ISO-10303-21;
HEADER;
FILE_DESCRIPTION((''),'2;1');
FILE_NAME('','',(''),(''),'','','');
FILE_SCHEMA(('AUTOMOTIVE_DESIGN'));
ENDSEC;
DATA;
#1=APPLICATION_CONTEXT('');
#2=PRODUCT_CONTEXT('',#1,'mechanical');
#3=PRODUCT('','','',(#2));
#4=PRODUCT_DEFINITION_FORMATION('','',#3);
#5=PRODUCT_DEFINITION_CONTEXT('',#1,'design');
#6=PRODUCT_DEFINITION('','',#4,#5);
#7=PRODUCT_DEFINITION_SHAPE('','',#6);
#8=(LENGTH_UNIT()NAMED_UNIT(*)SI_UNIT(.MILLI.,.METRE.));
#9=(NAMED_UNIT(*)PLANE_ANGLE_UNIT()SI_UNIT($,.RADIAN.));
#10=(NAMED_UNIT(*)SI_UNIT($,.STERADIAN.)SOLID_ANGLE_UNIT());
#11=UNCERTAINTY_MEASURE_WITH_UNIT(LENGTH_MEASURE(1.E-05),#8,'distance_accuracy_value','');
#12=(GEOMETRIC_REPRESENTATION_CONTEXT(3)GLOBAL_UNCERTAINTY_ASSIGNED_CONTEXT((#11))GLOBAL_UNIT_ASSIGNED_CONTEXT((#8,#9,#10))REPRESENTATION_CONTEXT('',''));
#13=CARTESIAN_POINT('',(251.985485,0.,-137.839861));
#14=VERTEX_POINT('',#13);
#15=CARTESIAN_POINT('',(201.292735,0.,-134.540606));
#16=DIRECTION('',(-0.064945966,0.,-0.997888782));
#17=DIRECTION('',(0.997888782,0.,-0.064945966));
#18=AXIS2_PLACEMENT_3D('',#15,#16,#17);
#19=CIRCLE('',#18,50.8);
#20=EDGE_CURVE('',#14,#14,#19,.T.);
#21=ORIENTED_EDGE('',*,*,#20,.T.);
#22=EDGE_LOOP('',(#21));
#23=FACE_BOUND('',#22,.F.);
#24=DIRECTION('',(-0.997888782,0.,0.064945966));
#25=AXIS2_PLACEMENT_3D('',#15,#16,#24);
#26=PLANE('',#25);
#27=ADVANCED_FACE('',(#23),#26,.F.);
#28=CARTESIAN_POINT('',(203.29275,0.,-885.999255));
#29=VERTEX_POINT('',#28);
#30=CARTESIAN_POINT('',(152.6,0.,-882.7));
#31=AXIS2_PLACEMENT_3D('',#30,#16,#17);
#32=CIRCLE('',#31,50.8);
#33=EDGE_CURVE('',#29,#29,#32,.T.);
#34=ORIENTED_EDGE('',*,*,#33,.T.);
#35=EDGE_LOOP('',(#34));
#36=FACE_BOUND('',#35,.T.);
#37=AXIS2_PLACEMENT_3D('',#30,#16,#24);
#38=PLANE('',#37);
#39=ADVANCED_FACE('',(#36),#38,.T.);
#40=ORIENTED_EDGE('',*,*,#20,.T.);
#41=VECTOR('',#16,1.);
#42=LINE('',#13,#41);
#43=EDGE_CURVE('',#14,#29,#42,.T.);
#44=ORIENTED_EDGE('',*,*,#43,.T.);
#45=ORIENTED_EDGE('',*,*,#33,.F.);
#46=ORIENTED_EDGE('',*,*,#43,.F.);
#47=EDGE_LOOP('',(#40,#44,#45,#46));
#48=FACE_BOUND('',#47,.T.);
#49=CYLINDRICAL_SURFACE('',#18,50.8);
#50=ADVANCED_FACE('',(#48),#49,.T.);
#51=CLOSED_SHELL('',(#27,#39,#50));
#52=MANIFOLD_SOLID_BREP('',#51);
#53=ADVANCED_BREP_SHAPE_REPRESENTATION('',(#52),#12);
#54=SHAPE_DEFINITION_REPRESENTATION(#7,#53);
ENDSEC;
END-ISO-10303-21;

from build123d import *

# Parameters (mm, degrees)
F2_R = 50.8


with BuildPart() as f3:
    # F3: sweep along a path in F0
    with BuildLine(Plane.XZ) as f3_path:
        Line((201.2927353119, -134.5406058412), (152.6, -882.7))
    # F2 (on face) → F3 (sweep)
    with BuildSketch(Plane(origin=(-32.2167412585, 0, -495.007262733), x_dir=(0.9978887822, 0, -0.0649459657), z_dir=(-0.0649459657, 0, -0.9978887822))):
        with Locations((209.6056320663, 0)):
            Circle(F2_R)
    sweep(path=f3_path.line)


solid = f3.part
